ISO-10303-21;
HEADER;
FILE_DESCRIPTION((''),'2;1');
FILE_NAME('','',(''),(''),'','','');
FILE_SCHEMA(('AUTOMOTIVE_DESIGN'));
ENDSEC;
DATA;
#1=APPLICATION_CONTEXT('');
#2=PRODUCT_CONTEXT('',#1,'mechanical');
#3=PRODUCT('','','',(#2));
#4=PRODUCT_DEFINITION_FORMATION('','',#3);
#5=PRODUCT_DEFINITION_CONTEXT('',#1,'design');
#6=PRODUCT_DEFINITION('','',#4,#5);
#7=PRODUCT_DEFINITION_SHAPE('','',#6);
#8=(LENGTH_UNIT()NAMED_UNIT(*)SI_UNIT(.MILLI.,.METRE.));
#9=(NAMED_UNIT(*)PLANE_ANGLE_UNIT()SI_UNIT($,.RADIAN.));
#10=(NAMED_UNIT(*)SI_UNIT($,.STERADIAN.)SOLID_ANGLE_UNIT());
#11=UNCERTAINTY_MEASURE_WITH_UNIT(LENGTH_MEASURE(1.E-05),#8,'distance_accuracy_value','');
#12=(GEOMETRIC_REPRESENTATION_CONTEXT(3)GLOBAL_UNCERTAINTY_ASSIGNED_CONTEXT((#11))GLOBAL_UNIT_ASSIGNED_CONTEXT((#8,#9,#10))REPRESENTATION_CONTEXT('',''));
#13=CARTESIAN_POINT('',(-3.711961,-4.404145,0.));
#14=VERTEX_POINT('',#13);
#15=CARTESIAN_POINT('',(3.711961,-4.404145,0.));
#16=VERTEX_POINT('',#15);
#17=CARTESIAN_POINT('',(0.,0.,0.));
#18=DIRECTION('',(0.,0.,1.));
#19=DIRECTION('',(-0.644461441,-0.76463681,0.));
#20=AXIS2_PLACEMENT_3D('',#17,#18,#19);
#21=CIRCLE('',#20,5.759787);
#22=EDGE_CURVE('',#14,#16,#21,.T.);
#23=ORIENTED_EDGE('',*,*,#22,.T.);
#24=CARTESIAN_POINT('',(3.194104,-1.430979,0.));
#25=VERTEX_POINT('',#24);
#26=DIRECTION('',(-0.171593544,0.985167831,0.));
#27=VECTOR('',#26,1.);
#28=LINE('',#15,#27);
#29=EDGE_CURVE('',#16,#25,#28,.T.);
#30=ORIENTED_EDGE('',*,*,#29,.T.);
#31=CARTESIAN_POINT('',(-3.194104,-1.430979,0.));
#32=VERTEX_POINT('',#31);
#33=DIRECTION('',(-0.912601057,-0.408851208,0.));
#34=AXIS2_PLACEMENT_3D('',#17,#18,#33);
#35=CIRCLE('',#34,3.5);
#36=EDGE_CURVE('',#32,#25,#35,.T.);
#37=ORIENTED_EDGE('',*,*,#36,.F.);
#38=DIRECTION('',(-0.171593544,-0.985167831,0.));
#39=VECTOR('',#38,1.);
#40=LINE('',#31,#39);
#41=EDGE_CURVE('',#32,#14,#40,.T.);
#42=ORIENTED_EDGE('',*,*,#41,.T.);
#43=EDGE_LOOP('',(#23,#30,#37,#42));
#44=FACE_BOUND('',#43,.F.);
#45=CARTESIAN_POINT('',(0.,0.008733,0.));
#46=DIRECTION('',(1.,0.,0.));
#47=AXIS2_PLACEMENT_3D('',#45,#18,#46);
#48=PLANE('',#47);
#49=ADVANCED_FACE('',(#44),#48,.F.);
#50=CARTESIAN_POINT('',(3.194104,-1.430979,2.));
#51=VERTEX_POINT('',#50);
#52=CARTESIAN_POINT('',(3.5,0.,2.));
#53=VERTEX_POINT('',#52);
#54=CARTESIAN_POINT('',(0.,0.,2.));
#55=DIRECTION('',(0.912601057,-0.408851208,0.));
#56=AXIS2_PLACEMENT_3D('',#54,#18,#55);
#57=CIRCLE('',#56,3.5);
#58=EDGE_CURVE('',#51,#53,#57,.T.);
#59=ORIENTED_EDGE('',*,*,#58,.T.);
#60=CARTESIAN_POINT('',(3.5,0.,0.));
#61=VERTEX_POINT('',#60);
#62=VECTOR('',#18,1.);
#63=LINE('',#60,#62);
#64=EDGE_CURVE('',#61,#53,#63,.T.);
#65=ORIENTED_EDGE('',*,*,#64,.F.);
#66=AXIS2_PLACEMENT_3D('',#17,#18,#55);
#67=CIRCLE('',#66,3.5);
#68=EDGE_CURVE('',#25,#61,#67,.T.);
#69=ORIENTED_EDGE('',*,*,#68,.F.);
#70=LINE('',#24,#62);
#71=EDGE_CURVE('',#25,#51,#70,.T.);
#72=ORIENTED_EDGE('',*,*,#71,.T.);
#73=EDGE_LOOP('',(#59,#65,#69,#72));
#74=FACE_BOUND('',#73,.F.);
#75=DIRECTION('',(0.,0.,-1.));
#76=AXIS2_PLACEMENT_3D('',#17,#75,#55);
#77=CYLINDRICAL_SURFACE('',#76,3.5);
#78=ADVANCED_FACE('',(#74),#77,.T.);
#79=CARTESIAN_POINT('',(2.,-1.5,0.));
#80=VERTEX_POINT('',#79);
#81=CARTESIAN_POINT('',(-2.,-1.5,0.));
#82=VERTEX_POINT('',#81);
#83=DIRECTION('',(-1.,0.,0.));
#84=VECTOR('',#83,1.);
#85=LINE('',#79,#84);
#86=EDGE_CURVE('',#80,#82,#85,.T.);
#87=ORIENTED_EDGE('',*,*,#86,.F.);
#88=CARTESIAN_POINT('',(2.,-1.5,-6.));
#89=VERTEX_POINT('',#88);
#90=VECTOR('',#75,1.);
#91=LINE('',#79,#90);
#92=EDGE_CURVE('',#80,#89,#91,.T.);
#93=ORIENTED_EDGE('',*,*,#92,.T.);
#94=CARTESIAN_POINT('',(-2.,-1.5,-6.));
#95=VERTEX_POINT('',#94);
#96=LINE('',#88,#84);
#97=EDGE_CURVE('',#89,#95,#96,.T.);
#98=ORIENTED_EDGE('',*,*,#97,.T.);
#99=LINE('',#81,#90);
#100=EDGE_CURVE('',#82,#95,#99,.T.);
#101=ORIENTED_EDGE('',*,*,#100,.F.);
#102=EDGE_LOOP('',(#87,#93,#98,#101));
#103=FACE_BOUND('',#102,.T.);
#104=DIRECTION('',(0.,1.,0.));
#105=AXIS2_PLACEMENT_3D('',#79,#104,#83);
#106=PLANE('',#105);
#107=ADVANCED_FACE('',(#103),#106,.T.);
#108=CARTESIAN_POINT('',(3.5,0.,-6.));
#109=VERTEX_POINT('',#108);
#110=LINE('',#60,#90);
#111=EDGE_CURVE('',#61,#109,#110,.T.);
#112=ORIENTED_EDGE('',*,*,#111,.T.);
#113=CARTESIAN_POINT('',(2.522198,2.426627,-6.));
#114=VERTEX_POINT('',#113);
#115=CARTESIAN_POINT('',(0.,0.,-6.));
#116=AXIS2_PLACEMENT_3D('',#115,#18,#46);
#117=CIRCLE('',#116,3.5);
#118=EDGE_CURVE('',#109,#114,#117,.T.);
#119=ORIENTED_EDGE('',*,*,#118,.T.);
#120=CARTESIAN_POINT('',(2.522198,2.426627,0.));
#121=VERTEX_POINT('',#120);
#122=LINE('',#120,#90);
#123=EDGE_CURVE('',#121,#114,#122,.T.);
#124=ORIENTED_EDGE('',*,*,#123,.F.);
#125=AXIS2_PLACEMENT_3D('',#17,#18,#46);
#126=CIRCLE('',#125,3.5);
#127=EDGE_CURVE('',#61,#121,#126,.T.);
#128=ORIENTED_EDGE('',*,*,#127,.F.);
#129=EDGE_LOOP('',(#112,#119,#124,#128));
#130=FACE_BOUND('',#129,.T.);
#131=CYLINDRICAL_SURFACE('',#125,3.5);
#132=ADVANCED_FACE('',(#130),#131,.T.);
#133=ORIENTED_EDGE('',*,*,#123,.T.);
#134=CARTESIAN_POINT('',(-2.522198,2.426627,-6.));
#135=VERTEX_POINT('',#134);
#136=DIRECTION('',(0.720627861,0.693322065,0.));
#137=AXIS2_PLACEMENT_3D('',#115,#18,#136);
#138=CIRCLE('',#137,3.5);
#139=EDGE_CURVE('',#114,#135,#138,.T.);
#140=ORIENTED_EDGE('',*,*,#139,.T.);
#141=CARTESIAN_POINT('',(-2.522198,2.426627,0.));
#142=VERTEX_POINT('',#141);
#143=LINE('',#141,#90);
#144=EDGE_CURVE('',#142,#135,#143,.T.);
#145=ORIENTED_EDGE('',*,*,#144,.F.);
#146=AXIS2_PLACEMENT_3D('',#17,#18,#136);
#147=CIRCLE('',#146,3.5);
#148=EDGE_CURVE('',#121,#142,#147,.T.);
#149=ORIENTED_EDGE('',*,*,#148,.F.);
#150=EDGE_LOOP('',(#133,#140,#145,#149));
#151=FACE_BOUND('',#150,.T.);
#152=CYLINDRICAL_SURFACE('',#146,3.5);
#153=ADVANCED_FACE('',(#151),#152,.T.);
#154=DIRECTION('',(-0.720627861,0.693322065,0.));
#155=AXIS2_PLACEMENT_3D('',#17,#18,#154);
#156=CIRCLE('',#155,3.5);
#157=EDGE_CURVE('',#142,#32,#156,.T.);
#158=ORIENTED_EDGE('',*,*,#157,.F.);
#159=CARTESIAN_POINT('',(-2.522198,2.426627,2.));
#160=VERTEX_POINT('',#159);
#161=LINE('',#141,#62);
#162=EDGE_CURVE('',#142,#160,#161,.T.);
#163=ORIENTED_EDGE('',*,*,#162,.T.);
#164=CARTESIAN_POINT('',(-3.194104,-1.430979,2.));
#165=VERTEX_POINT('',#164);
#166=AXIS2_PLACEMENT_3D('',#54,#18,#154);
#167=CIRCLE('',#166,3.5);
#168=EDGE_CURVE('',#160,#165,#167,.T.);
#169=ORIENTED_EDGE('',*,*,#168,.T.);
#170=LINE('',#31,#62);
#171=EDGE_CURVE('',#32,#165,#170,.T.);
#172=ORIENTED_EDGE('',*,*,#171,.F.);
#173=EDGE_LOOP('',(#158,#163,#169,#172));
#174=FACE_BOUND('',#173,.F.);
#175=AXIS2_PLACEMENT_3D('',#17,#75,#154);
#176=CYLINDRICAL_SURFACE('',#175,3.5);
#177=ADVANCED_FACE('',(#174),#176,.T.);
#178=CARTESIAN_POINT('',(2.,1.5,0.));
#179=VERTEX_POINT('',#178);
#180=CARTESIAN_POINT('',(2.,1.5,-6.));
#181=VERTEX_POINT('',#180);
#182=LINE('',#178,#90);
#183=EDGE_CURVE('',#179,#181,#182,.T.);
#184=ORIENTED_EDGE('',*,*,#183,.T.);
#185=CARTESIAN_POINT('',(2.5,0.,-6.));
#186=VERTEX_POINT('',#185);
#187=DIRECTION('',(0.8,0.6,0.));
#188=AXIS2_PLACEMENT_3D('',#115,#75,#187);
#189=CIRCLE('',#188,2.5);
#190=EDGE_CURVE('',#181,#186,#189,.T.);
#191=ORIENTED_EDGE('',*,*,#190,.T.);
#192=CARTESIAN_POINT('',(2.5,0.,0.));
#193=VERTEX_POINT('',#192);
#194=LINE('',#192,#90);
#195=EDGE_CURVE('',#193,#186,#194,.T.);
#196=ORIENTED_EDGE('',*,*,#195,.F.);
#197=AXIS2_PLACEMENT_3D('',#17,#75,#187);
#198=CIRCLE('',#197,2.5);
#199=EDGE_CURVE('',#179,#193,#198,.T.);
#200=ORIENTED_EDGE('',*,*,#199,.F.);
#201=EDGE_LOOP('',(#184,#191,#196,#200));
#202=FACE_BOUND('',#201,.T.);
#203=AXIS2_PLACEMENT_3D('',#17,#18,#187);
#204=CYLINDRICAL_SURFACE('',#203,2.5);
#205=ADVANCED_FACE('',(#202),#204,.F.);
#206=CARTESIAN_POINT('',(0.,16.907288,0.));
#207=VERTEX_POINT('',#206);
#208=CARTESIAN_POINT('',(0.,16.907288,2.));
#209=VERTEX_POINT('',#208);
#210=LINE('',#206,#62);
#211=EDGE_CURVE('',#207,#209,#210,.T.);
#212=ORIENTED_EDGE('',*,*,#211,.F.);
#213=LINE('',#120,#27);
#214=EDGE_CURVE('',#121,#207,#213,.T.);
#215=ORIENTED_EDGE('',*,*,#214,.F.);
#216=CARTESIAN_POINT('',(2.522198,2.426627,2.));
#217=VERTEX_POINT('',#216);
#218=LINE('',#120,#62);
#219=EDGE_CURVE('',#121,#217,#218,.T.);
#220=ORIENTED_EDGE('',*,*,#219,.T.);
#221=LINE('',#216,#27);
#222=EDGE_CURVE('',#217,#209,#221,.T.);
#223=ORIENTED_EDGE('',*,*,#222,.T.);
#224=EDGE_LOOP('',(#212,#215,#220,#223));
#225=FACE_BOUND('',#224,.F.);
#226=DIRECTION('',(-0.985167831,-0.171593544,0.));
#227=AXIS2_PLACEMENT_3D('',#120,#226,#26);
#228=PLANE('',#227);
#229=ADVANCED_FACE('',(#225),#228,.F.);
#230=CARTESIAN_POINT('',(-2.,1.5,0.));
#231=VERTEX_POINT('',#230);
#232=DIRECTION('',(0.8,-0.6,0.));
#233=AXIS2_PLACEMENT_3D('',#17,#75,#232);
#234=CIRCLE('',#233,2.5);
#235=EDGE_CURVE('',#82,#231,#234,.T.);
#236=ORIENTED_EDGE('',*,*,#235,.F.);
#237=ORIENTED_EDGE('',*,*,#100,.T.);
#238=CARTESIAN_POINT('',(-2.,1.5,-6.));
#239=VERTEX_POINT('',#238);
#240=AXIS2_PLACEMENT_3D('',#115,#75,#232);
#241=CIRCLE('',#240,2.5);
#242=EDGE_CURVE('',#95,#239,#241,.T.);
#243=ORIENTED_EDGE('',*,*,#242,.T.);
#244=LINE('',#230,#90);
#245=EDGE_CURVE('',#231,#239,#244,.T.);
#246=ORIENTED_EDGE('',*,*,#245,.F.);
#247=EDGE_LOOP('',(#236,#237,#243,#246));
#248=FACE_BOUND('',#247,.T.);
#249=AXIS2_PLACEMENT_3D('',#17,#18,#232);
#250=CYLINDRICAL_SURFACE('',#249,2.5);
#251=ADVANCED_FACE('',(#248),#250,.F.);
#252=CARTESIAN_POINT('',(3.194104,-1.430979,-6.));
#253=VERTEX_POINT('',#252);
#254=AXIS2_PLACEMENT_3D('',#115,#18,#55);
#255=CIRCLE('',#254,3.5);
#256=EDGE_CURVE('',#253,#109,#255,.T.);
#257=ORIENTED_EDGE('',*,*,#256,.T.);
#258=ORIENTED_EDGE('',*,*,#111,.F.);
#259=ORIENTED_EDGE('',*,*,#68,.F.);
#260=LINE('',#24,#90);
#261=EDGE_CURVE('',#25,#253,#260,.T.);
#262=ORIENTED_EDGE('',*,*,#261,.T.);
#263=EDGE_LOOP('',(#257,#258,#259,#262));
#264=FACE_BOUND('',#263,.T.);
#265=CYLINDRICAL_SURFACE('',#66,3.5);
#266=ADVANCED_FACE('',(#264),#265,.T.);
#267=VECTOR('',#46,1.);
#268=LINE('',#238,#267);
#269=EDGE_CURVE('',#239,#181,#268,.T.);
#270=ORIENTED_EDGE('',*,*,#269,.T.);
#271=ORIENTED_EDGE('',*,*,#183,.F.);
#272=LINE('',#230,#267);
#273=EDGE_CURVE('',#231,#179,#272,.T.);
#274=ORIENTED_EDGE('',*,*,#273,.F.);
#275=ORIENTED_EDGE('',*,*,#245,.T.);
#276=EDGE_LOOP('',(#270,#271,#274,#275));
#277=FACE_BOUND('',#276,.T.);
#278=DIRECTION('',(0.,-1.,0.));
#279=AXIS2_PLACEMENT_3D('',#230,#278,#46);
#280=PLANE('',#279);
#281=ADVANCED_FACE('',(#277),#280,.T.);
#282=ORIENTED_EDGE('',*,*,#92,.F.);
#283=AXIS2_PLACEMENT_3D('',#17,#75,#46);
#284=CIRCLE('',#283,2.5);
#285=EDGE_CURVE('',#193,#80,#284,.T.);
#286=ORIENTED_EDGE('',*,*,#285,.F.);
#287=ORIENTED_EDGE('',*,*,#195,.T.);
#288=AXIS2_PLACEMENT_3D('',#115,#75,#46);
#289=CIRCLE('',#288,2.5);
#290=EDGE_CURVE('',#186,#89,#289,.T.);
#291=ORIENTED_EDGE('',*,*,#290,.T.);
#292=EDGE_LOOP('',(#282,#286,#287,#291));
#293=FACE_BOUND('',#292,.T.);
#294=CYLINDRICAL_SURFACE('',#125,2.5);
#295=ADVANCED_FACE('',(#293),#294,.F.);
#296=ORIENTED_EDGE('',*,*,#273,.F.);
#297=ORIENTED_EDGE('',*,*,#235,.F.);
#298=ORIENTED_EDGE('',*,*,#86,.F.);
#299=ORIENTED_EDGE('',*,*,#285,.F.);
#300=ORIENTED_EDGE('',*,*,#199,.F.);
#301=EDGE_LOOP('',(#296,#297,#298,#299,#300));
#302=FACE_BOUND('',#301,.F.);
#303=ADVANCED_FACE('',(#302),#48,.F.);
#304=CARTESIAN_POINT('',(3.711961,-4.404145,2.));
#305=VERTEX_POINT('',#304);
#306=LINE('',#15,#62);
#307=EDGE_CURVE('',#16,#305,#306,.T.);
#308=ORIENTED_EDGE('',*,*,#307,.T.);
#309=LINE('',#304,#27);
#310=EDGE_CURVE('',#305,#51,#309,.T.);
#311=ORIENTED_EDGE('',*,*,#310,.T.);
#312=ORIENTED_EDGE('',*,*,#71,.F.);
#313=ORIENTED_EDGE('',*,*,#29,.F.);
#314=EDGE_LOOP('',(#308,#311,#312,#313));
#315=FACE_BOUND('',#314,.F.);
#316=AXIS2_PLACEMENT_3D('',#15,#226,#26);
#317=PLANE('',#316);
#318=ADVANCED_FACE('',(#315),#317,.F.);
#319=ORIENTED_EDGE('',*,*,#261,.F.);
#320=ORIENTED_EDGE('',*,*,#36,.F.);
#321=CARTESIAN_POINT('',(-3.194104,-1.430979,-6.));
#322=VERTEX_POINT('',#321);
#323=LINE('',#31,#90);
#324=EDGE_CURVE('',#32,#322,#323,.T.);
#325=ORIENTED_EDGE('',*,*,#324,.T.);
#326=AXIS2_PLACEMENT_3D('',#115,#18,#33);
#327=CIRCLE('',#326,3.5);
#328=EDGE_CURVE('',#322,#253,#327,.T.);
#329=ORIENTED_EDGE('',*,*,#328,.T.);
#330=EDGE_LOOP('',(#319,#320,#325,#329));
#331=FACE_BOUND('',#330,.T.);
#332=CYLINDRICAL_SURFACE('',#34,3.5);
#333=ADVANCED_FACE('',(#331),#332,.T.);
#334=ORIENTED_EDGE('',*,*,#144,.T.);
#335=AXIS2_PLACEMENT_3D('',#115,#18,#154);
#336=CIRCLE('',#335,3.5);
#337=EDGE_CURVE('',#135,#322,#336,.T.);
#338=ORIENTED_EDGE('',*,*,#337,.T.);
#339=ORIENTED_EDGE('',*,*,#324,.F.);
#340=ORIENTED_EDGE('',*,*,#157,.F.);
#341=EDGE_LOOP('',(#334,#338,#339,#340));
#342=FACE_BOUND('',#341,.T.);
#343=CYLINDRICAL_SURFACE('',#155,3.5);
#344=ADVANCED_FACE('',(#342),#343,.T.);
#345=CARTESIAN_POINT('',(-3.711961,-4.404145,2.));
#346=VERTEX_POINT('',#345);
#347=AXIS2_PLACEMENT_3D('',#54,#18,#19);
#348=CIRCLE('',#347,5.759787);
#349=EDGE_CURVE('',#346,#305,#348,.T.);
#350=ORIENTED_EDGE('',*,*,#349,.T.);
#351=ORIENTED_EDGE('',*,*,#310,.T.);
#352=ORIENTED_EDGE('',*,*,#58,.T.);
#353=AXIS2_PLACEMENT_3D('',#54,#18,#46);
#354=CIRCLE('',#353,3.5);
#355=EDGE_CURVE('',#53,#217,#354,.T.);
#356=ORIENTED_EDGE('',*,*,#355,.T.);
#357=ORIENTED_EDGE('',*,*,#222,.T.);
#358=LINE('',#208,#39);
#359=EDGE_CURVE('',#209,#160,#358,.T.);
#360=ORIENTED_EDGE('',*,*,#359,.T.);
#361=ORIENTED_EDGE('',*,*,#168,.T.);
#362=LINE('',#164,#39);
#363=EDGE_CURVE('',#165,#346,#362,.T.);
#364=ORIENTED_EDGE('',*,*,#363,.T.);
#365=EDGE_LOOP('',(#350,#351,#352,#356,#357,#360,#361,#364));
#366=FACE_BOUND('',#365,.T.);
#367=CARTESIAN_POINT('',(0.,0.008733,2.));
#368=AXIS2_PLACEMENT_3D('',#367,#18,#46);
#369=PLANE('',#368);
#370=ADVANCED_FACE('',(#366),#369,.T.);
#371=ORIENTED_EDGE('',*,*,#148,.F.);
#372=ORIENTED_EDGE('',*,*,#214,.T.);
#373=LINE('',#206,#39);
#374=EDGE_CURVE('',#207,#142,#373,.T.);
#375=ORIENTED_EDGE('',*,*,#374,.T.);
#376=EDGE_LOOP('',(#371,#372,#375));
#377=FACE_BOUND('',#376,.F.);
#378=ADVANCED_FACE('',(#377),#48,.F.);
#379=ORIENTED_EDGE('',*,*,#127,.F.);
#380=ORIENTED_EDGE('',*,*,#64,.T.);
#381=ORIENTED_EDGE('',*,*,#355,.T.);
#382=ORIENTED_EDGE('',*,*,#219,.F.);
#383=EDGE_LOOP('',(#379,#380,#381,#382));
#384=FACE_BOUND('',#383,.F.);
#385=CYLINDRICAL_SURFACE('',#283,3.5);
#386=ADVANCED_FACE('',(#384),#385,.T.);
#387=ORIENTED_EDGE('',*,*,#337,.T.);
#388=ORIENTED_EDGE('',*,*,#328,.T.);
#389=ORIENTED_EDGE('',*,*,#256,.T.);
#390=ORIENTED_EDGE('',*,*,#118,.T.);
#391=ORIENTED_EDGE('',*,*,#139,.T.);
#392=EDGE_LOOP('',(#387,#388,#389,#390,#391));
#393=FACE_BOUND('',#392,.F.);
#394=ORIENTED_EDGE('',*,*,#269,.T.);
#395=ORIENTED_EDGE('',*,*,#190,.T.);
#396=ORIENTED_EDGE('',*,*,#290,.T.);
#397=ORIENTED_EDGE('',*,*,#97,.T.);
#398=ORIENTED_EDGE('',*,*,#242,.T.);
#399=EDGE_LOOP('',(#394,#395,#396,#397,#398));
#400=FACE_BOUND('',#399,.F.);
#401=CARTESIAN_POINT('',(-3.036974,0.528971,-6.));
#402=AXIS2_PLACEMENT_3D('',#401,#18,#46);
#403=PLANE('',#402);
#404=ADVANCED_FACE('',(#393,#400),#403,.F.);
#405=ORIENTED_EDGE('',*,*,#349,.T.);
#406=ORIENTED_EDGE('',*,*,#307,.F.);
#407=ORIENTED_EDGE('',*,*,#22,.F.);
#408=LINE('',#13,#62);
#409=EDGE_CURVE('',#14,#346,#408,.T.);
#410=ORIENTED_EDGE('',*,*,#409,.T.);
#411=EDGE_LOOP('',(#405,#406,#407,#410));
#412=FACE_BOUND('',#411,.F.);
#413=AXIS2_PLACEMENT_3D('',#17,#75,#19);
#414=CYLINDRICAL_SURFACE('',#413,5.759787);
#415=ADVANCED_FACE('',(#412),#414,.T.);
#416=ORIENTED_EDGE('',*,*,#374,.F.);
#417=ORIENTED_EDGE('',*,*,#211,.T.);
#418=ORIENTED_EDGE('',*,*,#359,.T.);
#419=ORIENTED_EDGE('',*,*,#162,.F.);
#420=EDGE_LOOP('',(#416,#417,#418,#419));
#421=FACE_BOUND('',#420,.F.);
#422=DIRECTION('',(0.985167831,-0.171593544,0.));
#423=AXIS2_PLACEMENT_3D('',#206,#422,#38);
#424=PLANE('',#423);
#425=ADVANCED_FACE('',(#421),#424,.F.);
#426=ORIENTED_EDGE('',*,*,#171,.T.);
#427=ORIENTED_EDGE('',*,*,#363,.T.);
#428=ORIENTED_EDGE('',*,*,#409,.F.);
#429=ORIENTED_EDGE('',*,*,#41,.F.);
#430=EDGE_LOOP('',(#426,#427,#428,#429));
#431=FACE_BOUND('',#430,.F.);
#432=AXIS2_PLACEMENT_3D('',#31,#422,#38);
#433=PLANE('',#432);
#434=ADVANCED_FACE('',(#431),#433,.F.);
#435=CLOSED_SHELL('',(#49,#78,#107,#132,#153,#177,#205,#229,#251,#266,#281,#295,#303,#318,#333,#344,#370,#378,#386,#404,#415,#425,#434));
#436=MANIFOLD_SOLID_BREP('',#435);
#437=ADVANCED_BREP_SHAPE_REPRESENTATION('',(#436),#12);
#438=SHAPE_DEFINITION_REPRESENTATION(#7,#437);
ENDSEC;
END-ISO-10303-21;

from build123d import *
from build123d import SkipClean  # not in build123d's __all__

# Parameters (mm, degrees)
F1_DEPTH = 2
F2_DEPTH = 6


with BuildPart() as f1:
    # F0 (on Top) → F1 (new body)
    with BuildSketch(Plane.XY):
        with BuildLine():
            Line((-2.522197513, 2.4266272284), (-3.1941037004, -1.430979228))
            ThreePointArc((-3.1941037004, -1.430979228), (0, -3.5), (3.1941037004, -1.430979228))
            Line((3.1941037004, -1.430979228), (2.522197513, 2.4266272284))
            ThreePointArc((2.522197513, 2.4266272284), (0, 3.5), (-2.522197513, 2.4266272284))
        make_face()
        with BuildLine():
            ThreePointArc((2, 1.5), (2.3717082451, 0.790569415), (2.5, 0))
            ThreePointArc((2.5, 0), (2.3717082451, -0.790569415), (2, -1.5))
            ThreePointArc((2, -1.5), (0, -2.5), (-2, -1.5))
            ThreePointArc((-2, -1.5), (-2.5, 0), (-2, 1.5))
            ThreePointArc((-2, 1.5), (0, 2.5), (2, 1.5))
        make_face(mode=Mode.SUBTRACT)
        with BuildLine():
            Line((0, 16.9072877616), (-2.522197513, 2.4266272284))
            ThreePointArc((-2.522197513, 2.4266272284), (0, 3.5), (2.522197513, 2.4266272284))
            Line((2.522197513, 2.4266272284), (0, 16.9072877616))
        make_face()
        with BuildLine():
            Line((-3.1941037004, -1.430979228), (-3.7119607441, -4.4041452929))
            ThreePointArc((-3.7119607441, -4.4041452929), (0, -5.7597871772), (3.7119607441, -4.4041452929))
            Line((3.7119607441, -4.4041452929), (3.1941037004, -1.430979228))
            ThreePointArc((3.1941037004, -1.430979228), (0, -3.5), (-3.1941037004, -1.430979228))
        make_face()
        with BuildLine():
            ThreePointArc((2, -1.5), (2.3717082451, -0.790569415), (2.5, 0))
            ThreePointArc((2.5, 0), (2.3717082451, 0.790569415), (2, 1.5))
            Line((2, 1.5), (-2, 1.5))
            ThreePointArc((-2, 1.5), (-2.5, 0), (-2, -1.5))
            Line((-2, -1.5), (2, -1.5))
        make_face()
        with BuildLine():
            Line((-2, 1.5), (2, 1.5))
            ThreePointArc((2, 1.5), (0, 2.5), (-2, 1.5))
        make_face()
        with BuildLine():
            ThreePointArc((-2, -1.5), (0, -2.5), (2, -1.5))
            Line((2, -1.5), (-2, -1.5))
        make_face()
        with BuildLine():
            Line((2.522197513, 2.4266272284), (3.1941037004, -1.430979228))
            ThreePointArc((3.1941037004, -1.430979228), (3.4226716868, -0.7316546482), (3.5, 0))
            ThreePointArc((3.5, 0), (3.2463588292, 1.3081109862), (2.522197513, 2.4266272284))
        make_face()
        with BuildLine():
            ThreePointArc((-2.522197513, 2.4266272284), (-3.4480874095, 0.6005774025), (-3.1941037004, -1.430979228))
            Line((-3.1941037004, -1.430979228), (-2.522197513, 2.4266272284))
        make_face()
    extrude(amount=F1_DEPTH)

    # F0 (on Top) → F2 (join)
    with BuildSketch(Plane.XY):
        with BuildLine():
            ThreePointArc((-2.522197513, 2.4266272284), (-3.4480874095, 0.6005774025), (-3.1941037004, -1.430979228))
            Line((-3.1941037004, -1.430979228), (-2.522197513, 2.4266272284))
        make_face()
        with BuildLine():
            Line((2.522197513, 2.4266272284), (3.1941037004, -1.430979228))
            ThreePointArc((3.1941037004, -1.430979228), (3.4226716868, -0.7316546482), (3.5, 0))
            ThreePointArc((3.5, 0), (3.2463588292, 1.3081109862), (2.522197513, 2.4266272284))
        make_face()
        with BuildLine():
            Line((-2.522197513, 2.4266272284), (-3.1941037004, -1.430979228))
            ThreePointArc((-3.1941037004, -1.430979228), (0, -3.5), (3.1941037004, -1.430979228))
            Line((3.1941037004, -1.430979228), (2.522197513, 2.4266272284))
            ThreePointArc((2.522197513, 2.4266272284), (0, 3.5), (-2.522197513, 2.4266272284))
        make_face()
        with BuildLine():
            ThreePointArc((2, 1.5), (2.3717082451, 0.790569415), (2.5, 0))
            ThreePointArc((2.5, 0), (2.3717082451, -0.790569415), (2, -1.5))
            ThreePointArc((2, -1.5), (0, -2.5), (-2, -1.5))
            ThreePointArc((-2, -1.5), (-2.5, 0), (-2, 1.5))
            ThreePointArc((-2, 1.5), (0, 2.5), (2, 1.5))
        make_face(mode=Mode.SUBTRACT)
        with BuildLine():
            Line((-2, 1.5), (2, 1.5))
            ThreePointArc((2, 1.5), (0, 2.5), (-2, 1.5))
        make_face()
        with BuildLine():
            ThreePointArc((-2, -1.5), (0, -2.5), (2, -1.5))
            Line((2, -1.5), (-2, -1.5))
        make_face()
    with SkipClean():  # cleaning this boolean's faces spoils the solid; the shape is the same uncleaned
        extrude(amount=-F2_DEPTH)


solid = f1.part
